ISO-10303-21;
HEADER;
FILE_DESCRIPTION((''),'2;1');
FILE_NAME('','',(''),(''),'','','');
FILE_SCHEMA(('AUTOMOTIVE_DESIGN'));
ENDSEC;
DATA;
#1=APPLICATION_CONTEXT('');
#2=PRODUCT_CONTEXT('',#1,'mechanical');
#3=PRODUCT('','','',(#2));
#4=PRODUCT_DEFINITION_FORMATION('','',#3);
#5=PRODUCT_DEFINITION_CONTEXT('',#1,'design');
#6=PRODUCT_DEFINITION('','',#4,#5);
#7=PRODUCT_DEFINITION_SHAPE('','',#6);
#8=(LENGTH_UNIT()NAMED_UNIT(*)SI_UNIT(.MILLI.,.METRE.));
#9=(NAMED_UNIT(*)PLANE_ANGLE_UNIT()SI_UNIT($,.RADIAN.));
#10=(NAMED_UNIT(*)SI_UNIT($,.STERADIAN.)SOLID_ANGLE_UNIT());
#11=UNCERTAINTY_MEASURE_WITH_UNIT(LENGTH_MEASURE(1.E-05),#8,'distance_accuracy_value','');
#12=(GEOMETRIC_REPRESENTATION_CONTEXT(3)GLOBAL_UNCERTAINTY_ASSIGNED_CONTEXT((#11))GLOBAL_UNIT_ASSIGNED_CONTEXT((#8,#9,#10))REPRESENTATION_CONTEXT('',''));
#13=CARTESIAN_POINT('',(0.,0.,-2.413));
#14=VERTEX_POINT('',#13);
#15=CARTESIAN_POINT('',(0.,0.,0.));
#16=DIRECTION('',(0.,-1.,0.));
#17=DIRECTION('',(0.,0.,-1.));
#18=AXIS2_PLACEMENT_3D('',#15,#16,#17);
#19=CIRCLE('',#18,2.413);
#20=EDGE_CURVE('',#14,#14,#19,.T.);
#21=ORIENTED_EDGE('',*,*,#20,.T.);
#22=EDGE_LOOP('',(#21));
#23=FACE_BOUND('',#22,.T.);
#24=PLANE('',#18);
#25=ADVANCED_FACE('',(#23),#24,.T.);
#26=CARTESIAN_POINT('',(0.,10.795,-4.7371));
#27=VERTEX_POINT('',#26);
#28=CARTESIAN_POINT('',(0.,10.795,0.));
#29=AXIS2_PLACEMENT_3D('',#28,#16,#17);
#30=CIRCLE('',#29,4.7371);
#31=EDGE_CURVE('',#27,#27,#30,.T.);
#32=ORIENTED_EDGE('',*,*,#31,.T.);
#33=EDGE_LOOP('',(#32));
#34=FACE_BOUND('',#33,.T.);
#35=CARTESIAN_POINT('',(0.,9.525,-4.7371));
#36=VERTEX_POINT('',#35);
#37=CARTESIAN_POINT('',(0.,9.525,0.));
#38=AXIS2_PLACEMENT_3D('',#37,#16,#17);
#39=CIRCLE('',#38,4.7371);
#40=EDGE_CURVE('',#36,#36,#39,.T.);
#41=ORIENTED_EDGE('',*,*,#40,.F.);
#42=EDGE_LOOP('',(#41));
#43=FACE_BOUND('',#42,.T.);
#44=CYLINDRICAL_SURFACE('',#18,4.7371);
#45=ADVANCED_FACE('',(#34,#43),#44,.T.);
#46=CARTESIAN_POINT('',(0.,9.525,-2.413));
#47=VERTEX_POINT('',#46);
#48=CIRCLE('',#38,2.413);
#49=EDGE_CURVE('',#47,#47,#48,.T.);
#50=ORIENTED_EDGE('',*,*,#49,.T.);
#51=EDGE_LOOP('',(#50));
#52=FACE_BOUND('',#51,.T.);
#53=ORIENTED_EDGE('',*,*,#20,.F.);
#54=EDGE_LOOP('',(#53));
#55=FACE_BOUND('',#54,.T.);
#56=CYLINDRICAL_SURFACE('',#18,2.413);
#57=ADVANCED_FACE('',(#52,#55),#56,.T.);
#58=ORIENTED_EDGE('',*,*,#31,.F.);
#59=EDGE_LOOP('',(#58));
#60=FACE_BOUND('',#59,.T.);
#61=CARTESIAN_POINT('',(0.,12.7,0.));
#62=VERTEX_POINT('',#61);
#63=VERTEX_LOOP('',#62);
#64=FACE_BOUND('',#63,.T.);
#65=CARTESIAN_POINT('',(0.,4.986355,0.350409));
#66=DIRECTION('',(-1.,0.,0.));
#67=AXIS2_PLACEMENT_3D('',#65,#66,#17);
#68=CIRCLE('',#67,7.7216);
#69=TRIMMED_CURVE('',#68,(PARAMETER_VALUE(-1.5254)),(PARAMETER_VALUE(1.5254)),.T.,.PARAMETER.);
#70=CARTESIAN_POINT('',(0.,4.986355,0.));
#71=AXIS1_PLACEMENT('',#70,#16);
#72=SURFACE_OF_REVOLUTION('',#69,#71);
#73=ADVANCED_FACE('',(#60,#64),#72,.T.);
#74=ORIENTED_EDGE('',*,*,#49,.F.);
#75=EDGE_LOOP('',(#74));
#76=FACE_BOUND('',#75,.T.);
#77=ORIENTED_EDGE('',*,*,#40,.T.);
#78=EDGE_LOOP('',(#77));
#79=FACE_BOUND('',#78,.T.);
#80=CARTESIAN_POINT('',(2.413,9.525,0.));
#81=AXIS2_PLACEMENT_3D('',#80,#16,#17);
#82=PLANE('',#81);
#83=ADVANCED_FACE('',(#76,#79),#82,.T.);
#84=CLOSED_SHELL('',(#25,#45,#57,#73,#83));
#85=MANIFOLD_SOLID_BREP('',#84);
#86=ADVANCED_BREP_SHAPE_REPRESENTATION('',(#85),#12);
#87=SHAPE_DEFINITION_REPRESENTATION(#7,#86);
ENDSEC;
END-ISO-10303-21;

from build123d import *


with BuildPart() as part:
    # Sketch1 → Revolve1 (revolve)
    with BuildSketch(Plane.XY):
        with BuildLine():
            Line((0, 0), (0, 12.7))
            ThreePointArc((0, 12.7), (2.53056206, 12.15036999), (4.7371, 10.795))
            Line((4.7371, 10.795), (4.7371, 9.525))
            Line((4.7371, 9.525), (2.413, 9.525))
            Line((2.413, 9.525), (2.413, 0))
            Line((2.413, 0), (0, 0))
        make_face()
    revolve(axis=Axis((0, 0, 0), (0, 1, 0)))


solid = part.part
